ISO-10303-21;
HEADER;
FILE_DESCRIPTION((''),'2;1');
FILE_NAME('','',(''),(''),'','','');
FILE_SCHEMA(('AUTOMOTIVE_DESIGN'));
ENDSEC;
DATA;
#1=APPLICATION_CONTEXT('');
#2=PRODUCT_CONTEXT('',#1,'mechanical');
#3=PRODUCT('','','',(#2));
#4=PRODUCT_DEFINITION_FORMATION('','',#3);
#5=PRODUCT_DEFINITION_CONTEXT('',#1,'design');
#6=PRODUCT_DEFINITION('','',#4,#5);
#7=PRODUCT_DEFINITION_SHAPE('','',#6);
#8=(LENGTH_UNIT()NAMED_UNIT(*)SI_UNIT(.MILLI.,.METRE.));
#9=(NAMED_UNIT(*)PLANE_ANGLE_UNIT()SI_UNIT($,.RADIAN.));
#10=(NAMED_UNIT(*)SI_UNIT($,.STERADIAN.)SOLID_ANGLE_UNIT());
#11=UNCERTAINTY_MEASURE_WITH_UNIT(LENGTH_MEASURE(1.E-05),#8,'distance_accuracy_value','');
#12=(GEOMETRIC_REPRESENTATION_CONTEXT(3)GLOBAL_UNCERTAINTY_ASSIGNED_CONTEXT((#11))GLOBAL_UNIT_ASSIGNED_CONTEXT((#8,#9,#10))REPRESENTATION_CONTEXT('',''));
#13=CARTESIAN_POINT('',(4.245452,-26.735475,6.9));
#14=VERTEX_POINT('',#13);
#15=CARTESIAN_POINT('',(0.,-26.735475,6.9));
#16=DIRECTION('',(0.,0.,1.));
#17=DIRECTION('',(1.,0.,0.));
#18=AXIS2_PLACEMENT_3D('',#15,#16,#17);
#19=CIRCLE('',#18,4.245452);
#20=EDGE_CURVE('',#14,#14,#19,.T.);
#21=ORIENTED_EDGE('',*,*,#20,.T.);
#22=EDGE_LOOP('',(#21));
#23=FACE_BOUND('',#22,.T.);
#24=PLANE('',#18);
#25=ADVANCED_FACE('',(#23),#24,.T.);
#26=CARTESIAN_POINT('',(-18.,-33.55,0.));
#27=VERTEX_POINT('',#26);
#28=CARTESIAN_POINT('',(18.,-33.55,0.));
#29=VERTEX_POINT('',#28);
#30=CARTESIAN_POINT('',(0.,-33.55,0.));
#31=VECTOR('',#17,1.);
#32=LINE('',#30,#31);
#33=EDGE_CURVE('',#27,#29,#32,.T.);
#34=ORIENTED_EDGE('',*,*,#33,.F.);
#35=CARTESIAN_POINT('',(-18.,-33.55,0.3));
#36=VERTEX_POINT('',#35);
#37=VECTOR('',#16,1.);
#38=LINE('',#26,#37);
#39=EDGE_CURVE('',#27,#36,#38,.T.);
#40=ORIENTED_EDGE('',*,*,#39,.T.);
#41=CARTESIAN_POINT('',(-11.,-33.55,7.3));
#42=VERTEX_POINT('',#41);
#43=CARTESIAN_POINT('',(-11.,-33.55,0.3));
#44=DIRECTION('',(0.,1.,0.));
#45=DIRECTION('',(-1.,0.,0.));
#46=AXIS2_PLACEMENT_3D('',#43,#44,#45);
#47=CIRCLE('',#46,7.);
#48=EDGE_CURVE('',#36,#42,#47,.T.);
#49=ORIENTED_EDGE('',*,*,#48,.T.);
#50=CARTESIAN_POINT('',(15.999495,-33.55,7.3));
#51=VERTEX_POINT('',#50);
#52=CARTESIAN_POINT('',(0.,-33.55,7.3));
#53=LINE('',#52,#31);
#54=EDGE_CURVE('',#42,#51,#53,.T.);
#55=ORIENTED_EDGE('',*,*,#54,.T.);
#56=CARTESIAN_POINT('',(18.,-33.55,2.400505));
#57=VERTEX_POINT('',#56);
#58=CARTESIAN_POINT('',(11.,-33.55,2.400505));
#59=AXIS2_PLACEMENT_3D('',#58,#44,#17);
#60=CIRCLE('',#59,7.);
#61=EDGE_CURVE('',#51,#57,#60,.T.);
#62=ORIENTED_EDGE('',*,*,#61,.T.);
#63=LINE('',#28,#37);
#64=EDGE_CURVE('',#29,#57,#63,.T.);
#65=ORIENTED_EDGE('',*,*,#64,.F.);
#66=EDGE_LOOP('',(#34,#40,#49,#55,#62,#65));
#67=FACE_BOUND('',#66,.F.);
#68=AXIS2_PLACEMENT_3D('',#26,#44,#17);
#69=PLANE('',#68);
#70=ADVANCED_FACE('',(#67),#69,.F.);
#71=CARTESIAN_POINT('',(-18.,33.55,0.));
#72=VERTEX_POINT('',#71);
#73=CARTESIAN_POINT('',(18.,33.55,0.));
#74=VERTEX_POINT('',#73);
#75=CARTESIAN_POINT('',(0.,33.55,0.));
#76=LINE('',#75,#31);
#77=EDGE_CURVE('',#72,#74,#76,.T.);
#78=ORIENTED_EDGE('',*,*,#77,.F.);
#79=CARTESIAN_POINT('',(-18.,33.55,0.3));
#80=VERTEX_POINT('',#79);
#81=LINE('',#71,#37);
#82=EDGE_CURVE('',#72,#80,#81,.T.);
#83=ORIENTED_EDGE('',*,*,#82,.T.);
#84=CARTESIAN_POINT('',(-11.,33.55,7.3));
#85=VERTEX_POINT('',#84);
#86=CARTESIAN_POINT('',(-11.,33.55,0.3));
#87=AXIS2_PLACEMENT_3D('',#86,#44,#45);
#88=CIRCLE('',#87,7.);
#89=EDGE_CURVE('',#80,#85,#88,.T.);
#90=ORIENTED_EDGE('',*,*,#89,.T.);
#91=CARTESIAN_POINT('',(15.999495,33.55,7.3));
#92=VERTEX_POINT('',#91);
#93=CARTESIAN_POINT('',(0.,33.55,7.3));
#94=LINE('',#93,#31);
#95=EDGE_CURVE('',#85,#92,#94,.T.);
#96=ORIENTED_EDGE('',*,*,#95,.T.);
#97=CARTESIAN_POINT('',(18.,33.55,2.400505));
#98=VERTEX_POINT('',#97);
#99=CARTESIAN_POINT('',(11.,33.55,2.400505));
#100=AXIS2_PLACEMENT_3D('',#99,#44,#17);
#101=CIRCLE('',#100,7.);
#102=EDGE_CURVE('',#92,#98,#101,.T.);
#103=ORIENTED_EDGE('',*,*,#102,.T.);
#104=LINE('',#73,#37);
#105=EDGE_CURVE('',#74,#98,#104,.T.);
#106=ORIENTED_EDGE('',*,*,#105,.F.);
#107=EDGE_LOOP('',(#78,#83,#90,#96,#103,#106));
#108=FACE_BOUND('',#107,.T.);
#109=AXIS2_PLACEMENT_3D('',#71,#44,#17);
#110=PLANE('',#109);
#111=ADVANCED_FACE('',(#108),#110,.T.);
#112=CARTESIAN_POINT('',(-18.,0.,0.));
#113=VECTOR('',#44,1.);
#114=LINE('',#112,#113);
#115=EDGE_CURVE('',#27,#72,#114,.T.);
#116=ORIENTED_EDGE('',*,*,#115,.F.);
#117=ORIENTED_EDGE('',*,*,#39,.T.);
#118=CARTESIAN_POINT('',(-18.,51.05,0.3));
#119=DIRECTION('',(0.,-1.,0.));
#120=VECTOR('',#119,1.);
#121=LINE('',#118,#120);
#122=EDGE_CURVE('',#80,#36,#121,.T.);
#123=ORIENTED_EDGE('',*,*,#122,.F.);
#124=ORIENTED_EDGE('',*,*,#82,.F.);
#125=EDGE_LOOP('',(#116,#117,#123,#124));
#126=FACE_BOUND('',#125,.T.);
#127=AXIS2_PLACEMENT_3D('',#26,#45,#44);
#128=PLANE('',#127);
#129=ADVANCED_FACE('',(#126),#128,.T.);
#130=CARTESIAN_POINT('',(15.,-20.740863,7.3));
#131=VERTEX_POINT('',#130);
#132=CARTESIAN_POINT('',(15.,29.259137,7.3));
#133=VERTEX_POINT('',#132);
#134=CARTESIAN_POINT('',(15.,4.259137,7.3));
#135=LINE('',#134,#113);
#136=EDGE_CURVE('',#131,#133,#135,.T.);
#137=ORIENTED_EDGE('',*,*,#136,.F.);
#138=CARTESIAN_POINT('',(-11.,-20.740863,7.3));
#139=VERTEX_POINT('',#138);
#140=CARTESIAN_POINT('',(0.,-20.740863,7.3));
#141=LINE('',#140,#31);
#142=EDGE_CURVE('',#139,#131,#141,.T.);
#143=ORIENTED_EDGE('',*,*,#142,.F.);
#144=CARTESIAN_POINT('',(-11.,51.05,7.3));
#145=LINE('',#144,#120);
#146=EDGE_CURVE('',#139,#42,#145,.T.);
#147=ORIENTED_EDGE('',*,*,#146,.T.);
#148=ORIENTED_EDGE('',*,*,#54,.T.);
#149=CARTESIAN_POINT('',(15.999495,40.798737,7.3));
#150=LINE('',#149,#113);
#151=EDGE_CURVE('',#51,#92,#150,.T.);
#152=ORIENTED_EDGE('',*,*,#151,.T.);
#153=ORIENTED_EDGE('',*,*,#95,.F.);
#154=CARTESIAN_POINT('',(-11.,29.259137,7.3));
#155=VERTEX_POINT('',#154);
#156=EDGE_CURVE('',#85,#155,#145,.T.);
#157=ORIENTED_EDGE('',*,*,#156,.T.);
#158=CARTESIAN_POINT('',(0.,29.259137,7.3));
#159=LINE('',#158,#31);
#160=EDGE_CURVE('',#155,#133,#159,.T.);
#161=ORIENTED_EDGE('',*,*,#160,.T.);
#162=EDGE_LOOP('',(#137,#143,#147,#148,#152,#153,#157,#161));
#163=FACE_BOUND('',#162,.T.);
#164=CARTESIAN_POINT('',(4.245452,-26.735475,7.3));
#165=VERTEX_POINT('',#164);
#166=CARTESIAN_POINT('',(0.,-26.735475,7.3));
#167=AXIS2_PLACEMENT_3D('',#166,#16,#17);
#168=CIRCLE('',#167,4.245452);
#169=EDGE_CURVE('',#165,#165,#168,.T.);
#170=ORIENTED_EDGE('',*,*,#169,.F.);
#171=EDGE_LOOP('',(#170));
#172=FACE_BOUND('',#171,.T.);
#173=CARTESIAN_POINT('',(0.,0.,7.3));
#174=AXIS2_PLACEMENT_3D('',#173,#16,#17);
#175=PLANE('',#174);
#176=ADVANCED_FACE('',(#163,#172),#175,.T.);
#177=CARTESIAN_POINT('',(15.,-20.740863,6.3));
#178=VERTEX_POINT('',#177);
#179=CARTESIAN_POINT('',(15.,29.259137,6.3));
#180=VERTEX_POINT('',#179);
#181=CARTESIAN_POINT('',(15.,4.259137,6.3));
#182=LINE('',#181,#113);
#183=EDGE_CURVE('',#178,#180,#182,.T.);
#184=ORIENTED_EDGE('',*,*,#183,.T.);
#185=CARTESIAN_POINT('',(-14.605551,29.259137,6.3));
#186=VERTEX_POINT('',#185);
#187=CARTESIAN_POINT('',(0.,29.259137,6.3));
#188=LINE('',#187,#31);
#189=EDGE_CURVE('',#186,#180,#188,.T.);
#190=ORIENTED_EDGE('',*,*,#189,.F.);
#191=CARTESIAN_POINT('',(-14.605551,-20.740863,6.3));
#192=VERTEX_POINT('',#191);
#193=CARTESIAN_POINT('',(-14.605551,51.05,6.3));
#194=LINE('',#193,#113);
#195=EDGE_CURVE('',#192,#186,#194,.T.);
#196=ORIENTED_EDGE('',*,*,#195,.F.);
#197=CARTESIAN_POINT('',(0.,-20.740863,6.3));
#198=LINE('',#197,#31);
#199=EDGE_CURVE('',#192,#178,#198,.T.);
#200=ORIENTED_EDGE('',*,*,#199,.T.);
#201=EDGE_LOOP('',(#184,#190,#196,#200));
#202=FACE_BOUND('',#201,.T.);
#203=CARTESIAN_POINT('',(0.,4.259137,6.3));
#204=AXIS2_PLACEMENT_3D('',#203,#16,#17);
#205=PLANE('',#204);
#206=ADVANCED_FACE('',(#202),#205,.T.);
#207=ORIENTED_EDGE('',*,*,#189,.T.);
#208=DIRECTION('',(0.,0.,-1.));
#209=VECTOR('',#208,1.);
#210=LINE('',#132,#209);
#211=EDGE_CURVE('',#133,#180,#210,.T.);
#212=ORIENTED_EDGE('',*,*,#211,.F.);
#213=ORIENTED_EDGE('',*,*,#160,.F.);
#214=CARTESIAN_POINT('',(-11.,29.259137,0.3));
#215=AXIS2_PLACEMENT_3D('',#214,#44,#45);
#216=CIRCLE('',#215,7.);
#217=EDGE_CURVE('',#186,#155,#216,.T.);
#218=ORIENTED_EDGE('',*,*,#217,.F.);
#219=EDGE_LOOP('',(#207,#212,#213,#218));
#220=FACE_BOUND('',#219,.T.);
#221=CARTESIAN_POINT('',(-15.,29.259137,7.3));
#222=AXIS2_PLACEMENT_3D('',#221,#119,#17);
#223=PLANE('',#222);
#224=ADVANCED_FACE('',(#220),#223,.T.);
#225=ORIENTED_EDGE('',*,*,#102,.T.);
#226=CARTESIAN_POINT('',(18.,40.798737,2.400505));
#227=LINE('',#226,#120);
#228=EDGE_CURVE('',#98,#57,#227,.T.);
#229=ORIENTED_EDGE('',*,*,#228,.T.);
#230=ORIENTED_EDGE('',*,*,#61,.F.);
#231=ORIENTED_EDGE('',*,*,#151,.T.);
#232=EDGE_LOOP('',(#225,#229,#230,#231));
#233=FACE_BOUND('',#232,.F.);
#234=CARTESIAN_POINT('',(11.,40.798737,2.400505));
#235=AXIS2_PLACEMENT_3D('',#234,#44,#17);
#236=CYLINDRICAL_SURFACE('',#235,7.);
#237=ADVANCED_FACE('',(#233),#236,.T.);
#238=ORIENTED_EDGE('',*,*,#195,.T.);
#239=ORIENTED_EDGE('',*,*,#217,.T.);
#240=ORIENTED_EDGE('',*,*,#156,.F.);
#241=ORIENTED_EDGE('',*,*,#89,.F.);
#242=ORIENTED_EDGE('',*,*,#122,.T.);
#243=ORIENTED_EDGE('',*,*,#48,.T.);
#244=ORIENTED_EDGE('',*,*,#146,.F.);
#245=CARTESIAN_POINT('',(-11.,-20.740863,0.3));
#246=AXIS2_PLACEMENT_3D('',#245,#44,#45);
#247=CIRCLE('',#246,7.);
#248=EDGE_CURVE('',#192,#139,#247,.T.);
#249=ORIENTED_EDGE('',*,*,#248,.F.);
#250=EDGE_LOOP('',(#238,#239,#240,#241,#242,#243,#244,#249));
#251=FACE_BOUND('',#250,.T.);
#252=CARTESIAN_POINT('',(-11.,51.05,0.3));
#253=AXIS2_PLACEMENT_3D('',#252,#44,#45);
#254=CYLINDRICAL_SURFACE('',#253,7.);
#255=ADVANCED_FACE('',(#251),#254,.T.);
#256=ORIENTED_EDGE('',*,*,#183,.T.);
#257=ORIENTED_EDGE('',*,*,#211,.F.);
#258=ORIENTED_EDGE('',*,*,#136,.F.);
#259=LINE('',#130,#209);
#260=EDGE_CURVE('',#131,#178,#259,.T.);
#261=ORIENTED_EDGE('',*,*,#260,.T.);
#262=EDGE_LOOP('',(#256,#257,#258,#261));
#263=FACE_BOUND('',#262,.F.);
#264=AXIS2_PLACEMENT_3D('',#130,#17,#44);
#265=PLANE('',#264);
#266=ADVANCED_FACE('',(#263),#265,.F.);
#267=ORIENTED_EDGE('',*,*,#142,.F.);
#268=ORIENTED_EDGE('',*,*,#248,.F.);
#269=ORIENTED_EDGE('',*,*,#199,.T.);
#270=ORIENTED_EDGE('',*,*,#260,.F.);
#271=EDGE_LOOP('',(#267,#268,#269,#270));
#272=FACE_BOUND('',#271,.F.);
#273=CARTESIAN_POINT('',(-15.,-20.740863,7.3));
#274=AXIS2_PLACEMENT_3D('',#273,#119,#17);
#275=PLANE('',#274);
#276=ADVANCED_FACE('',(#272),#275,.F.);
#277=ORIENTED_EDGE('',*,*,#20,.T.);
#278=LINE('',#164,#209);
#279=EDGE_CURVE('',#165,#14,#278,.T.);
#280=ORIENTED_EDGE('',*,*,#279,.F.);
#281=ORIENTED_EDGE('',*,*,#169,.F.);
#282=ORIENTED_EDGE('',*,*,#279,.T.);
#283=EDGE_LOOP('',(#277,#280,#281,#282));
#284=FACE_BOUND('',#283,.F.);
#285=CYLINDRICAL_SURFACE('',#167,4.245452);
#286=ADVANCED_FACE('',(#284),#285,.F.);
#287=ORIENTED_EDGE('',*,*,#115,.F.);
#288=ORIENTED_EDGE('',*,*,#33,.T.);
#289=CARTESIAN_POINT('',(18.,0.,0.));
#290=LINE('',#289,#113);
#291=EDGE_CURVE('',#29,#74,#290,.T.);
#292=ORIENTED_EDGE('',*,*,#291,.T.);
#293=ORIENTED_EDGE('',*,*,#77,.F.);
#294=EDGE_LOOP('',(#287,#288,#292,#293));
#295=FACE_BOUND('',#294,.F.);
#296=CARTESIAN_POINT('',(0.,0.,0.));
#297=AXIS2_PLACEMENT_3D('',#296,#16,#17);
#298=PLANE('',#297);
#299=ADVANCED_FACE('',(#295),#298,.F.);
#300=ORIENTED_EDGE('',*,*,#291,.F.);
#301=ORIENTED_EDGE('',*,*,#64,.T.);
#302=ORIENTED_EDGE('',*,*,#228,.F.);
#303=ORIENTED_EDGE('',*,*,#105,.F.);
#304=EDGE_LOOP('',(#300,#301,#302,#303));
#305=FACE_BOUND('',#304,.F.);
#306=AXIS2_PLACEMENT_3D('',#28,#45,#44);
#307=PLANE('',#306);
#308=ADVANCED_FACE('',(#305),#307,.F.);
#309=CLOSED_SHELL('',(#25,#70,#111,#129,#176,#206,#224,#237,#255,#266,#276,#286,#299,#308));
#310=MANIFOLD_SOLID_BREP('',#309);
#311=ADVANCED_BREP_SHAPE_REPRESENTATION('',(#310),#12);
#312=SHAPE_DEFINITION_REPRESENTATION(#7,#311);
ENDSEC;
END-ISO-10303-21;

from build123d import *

# Parameters (mm, degrees)
F0_W        = 36
F0_H        = 67.1
F1_DEPTH    = 7.3
F2_R        = 4.2454518292
F3_DEPTH    = 0.4
F5_SIZE     = 2
F6_T1_DEPTH = 81.5974746831
F4_W        = 30
F4_H        = 50
F7_DEPTH    = 1
F8_T1_DEPTH = 102.1


# Not quite as in the source:
# - a fillet or chamfer that OpenCascade refuses, or shapes differently, is made with other operations: its cross-section is extruded or revolved along the edge and cut away or added


with BuildPart() as f1:
    # F0 (on Top) → F1 (new body)
    with BuildSketch(Plane.XY):
        Rectangle(F0_W, F0_H)
    extrude(amount=F1_DEPTH)

    # F2 (on face) → F3 (cut)
    with BuildSketch(Plane.XY.offset(7.3)):
        with Locations((0, -26.7354752868)):
            Circle(F2_R)
    extrude(amount=-F3_DEPTH, mode=Mode.SUBTRACT)

    # F5
    f5_edges = [f1.edges().sort_by_distance(p)[0] for p in [
        (18, 0, 7.3),
    ]]
    chamfer(f5_edges, length=F5_SIZE)

    # F6: fillet of radius 7 on 1 edges, made by hand

    # F6_s2 → F6_t1 (cut)
    with BuildSketch(Plane.XZ.offset(-40.7987373415)):
        with BuildLine():
            ThreePointArc((18, 2.4005050634), (17.4671567276, 5.0792890899), (15.9497474683, 7.3502525317))
            Line((15.9497474683, 7.3502525317), (18, 5.3))
            Line((18, 5.3), (18, 2.4005050634))
        make_face()
    extrude(amount=F6_T1_DEPTH, mode=Mode.SUBTRACT)

    # F4 (on face) → F7 (cut)
    with BuildSketch(Plane.XY.offset(7.3)):
        with Locations((0, 4.2591368308)):
            Rectangle(F4_W, F4_H)
    extrude(amount=-F7_DEPTH, mode=Mode.SUBTRACT)

    # F8: fillet of radius 7 on 1 edges, made by hand

    # F8_s2 → F8_t1 (cut)
    with BuildSketch(Plane.XZ.offset(-51.05)):
        with BuildLine():
            ThreePointArc((-18, 0.3), (-15.9497474683, 5.2497474683), (-11, 7.3))
            Line((-11, 7.3), (-18, 7.3))
            Line((-18, 7.3), (-18, 0.3))
        make_face()
    extrude(amount=F8_T1_DEPTH, mode=Mode.SUBTRACT)


solid = f1.part
